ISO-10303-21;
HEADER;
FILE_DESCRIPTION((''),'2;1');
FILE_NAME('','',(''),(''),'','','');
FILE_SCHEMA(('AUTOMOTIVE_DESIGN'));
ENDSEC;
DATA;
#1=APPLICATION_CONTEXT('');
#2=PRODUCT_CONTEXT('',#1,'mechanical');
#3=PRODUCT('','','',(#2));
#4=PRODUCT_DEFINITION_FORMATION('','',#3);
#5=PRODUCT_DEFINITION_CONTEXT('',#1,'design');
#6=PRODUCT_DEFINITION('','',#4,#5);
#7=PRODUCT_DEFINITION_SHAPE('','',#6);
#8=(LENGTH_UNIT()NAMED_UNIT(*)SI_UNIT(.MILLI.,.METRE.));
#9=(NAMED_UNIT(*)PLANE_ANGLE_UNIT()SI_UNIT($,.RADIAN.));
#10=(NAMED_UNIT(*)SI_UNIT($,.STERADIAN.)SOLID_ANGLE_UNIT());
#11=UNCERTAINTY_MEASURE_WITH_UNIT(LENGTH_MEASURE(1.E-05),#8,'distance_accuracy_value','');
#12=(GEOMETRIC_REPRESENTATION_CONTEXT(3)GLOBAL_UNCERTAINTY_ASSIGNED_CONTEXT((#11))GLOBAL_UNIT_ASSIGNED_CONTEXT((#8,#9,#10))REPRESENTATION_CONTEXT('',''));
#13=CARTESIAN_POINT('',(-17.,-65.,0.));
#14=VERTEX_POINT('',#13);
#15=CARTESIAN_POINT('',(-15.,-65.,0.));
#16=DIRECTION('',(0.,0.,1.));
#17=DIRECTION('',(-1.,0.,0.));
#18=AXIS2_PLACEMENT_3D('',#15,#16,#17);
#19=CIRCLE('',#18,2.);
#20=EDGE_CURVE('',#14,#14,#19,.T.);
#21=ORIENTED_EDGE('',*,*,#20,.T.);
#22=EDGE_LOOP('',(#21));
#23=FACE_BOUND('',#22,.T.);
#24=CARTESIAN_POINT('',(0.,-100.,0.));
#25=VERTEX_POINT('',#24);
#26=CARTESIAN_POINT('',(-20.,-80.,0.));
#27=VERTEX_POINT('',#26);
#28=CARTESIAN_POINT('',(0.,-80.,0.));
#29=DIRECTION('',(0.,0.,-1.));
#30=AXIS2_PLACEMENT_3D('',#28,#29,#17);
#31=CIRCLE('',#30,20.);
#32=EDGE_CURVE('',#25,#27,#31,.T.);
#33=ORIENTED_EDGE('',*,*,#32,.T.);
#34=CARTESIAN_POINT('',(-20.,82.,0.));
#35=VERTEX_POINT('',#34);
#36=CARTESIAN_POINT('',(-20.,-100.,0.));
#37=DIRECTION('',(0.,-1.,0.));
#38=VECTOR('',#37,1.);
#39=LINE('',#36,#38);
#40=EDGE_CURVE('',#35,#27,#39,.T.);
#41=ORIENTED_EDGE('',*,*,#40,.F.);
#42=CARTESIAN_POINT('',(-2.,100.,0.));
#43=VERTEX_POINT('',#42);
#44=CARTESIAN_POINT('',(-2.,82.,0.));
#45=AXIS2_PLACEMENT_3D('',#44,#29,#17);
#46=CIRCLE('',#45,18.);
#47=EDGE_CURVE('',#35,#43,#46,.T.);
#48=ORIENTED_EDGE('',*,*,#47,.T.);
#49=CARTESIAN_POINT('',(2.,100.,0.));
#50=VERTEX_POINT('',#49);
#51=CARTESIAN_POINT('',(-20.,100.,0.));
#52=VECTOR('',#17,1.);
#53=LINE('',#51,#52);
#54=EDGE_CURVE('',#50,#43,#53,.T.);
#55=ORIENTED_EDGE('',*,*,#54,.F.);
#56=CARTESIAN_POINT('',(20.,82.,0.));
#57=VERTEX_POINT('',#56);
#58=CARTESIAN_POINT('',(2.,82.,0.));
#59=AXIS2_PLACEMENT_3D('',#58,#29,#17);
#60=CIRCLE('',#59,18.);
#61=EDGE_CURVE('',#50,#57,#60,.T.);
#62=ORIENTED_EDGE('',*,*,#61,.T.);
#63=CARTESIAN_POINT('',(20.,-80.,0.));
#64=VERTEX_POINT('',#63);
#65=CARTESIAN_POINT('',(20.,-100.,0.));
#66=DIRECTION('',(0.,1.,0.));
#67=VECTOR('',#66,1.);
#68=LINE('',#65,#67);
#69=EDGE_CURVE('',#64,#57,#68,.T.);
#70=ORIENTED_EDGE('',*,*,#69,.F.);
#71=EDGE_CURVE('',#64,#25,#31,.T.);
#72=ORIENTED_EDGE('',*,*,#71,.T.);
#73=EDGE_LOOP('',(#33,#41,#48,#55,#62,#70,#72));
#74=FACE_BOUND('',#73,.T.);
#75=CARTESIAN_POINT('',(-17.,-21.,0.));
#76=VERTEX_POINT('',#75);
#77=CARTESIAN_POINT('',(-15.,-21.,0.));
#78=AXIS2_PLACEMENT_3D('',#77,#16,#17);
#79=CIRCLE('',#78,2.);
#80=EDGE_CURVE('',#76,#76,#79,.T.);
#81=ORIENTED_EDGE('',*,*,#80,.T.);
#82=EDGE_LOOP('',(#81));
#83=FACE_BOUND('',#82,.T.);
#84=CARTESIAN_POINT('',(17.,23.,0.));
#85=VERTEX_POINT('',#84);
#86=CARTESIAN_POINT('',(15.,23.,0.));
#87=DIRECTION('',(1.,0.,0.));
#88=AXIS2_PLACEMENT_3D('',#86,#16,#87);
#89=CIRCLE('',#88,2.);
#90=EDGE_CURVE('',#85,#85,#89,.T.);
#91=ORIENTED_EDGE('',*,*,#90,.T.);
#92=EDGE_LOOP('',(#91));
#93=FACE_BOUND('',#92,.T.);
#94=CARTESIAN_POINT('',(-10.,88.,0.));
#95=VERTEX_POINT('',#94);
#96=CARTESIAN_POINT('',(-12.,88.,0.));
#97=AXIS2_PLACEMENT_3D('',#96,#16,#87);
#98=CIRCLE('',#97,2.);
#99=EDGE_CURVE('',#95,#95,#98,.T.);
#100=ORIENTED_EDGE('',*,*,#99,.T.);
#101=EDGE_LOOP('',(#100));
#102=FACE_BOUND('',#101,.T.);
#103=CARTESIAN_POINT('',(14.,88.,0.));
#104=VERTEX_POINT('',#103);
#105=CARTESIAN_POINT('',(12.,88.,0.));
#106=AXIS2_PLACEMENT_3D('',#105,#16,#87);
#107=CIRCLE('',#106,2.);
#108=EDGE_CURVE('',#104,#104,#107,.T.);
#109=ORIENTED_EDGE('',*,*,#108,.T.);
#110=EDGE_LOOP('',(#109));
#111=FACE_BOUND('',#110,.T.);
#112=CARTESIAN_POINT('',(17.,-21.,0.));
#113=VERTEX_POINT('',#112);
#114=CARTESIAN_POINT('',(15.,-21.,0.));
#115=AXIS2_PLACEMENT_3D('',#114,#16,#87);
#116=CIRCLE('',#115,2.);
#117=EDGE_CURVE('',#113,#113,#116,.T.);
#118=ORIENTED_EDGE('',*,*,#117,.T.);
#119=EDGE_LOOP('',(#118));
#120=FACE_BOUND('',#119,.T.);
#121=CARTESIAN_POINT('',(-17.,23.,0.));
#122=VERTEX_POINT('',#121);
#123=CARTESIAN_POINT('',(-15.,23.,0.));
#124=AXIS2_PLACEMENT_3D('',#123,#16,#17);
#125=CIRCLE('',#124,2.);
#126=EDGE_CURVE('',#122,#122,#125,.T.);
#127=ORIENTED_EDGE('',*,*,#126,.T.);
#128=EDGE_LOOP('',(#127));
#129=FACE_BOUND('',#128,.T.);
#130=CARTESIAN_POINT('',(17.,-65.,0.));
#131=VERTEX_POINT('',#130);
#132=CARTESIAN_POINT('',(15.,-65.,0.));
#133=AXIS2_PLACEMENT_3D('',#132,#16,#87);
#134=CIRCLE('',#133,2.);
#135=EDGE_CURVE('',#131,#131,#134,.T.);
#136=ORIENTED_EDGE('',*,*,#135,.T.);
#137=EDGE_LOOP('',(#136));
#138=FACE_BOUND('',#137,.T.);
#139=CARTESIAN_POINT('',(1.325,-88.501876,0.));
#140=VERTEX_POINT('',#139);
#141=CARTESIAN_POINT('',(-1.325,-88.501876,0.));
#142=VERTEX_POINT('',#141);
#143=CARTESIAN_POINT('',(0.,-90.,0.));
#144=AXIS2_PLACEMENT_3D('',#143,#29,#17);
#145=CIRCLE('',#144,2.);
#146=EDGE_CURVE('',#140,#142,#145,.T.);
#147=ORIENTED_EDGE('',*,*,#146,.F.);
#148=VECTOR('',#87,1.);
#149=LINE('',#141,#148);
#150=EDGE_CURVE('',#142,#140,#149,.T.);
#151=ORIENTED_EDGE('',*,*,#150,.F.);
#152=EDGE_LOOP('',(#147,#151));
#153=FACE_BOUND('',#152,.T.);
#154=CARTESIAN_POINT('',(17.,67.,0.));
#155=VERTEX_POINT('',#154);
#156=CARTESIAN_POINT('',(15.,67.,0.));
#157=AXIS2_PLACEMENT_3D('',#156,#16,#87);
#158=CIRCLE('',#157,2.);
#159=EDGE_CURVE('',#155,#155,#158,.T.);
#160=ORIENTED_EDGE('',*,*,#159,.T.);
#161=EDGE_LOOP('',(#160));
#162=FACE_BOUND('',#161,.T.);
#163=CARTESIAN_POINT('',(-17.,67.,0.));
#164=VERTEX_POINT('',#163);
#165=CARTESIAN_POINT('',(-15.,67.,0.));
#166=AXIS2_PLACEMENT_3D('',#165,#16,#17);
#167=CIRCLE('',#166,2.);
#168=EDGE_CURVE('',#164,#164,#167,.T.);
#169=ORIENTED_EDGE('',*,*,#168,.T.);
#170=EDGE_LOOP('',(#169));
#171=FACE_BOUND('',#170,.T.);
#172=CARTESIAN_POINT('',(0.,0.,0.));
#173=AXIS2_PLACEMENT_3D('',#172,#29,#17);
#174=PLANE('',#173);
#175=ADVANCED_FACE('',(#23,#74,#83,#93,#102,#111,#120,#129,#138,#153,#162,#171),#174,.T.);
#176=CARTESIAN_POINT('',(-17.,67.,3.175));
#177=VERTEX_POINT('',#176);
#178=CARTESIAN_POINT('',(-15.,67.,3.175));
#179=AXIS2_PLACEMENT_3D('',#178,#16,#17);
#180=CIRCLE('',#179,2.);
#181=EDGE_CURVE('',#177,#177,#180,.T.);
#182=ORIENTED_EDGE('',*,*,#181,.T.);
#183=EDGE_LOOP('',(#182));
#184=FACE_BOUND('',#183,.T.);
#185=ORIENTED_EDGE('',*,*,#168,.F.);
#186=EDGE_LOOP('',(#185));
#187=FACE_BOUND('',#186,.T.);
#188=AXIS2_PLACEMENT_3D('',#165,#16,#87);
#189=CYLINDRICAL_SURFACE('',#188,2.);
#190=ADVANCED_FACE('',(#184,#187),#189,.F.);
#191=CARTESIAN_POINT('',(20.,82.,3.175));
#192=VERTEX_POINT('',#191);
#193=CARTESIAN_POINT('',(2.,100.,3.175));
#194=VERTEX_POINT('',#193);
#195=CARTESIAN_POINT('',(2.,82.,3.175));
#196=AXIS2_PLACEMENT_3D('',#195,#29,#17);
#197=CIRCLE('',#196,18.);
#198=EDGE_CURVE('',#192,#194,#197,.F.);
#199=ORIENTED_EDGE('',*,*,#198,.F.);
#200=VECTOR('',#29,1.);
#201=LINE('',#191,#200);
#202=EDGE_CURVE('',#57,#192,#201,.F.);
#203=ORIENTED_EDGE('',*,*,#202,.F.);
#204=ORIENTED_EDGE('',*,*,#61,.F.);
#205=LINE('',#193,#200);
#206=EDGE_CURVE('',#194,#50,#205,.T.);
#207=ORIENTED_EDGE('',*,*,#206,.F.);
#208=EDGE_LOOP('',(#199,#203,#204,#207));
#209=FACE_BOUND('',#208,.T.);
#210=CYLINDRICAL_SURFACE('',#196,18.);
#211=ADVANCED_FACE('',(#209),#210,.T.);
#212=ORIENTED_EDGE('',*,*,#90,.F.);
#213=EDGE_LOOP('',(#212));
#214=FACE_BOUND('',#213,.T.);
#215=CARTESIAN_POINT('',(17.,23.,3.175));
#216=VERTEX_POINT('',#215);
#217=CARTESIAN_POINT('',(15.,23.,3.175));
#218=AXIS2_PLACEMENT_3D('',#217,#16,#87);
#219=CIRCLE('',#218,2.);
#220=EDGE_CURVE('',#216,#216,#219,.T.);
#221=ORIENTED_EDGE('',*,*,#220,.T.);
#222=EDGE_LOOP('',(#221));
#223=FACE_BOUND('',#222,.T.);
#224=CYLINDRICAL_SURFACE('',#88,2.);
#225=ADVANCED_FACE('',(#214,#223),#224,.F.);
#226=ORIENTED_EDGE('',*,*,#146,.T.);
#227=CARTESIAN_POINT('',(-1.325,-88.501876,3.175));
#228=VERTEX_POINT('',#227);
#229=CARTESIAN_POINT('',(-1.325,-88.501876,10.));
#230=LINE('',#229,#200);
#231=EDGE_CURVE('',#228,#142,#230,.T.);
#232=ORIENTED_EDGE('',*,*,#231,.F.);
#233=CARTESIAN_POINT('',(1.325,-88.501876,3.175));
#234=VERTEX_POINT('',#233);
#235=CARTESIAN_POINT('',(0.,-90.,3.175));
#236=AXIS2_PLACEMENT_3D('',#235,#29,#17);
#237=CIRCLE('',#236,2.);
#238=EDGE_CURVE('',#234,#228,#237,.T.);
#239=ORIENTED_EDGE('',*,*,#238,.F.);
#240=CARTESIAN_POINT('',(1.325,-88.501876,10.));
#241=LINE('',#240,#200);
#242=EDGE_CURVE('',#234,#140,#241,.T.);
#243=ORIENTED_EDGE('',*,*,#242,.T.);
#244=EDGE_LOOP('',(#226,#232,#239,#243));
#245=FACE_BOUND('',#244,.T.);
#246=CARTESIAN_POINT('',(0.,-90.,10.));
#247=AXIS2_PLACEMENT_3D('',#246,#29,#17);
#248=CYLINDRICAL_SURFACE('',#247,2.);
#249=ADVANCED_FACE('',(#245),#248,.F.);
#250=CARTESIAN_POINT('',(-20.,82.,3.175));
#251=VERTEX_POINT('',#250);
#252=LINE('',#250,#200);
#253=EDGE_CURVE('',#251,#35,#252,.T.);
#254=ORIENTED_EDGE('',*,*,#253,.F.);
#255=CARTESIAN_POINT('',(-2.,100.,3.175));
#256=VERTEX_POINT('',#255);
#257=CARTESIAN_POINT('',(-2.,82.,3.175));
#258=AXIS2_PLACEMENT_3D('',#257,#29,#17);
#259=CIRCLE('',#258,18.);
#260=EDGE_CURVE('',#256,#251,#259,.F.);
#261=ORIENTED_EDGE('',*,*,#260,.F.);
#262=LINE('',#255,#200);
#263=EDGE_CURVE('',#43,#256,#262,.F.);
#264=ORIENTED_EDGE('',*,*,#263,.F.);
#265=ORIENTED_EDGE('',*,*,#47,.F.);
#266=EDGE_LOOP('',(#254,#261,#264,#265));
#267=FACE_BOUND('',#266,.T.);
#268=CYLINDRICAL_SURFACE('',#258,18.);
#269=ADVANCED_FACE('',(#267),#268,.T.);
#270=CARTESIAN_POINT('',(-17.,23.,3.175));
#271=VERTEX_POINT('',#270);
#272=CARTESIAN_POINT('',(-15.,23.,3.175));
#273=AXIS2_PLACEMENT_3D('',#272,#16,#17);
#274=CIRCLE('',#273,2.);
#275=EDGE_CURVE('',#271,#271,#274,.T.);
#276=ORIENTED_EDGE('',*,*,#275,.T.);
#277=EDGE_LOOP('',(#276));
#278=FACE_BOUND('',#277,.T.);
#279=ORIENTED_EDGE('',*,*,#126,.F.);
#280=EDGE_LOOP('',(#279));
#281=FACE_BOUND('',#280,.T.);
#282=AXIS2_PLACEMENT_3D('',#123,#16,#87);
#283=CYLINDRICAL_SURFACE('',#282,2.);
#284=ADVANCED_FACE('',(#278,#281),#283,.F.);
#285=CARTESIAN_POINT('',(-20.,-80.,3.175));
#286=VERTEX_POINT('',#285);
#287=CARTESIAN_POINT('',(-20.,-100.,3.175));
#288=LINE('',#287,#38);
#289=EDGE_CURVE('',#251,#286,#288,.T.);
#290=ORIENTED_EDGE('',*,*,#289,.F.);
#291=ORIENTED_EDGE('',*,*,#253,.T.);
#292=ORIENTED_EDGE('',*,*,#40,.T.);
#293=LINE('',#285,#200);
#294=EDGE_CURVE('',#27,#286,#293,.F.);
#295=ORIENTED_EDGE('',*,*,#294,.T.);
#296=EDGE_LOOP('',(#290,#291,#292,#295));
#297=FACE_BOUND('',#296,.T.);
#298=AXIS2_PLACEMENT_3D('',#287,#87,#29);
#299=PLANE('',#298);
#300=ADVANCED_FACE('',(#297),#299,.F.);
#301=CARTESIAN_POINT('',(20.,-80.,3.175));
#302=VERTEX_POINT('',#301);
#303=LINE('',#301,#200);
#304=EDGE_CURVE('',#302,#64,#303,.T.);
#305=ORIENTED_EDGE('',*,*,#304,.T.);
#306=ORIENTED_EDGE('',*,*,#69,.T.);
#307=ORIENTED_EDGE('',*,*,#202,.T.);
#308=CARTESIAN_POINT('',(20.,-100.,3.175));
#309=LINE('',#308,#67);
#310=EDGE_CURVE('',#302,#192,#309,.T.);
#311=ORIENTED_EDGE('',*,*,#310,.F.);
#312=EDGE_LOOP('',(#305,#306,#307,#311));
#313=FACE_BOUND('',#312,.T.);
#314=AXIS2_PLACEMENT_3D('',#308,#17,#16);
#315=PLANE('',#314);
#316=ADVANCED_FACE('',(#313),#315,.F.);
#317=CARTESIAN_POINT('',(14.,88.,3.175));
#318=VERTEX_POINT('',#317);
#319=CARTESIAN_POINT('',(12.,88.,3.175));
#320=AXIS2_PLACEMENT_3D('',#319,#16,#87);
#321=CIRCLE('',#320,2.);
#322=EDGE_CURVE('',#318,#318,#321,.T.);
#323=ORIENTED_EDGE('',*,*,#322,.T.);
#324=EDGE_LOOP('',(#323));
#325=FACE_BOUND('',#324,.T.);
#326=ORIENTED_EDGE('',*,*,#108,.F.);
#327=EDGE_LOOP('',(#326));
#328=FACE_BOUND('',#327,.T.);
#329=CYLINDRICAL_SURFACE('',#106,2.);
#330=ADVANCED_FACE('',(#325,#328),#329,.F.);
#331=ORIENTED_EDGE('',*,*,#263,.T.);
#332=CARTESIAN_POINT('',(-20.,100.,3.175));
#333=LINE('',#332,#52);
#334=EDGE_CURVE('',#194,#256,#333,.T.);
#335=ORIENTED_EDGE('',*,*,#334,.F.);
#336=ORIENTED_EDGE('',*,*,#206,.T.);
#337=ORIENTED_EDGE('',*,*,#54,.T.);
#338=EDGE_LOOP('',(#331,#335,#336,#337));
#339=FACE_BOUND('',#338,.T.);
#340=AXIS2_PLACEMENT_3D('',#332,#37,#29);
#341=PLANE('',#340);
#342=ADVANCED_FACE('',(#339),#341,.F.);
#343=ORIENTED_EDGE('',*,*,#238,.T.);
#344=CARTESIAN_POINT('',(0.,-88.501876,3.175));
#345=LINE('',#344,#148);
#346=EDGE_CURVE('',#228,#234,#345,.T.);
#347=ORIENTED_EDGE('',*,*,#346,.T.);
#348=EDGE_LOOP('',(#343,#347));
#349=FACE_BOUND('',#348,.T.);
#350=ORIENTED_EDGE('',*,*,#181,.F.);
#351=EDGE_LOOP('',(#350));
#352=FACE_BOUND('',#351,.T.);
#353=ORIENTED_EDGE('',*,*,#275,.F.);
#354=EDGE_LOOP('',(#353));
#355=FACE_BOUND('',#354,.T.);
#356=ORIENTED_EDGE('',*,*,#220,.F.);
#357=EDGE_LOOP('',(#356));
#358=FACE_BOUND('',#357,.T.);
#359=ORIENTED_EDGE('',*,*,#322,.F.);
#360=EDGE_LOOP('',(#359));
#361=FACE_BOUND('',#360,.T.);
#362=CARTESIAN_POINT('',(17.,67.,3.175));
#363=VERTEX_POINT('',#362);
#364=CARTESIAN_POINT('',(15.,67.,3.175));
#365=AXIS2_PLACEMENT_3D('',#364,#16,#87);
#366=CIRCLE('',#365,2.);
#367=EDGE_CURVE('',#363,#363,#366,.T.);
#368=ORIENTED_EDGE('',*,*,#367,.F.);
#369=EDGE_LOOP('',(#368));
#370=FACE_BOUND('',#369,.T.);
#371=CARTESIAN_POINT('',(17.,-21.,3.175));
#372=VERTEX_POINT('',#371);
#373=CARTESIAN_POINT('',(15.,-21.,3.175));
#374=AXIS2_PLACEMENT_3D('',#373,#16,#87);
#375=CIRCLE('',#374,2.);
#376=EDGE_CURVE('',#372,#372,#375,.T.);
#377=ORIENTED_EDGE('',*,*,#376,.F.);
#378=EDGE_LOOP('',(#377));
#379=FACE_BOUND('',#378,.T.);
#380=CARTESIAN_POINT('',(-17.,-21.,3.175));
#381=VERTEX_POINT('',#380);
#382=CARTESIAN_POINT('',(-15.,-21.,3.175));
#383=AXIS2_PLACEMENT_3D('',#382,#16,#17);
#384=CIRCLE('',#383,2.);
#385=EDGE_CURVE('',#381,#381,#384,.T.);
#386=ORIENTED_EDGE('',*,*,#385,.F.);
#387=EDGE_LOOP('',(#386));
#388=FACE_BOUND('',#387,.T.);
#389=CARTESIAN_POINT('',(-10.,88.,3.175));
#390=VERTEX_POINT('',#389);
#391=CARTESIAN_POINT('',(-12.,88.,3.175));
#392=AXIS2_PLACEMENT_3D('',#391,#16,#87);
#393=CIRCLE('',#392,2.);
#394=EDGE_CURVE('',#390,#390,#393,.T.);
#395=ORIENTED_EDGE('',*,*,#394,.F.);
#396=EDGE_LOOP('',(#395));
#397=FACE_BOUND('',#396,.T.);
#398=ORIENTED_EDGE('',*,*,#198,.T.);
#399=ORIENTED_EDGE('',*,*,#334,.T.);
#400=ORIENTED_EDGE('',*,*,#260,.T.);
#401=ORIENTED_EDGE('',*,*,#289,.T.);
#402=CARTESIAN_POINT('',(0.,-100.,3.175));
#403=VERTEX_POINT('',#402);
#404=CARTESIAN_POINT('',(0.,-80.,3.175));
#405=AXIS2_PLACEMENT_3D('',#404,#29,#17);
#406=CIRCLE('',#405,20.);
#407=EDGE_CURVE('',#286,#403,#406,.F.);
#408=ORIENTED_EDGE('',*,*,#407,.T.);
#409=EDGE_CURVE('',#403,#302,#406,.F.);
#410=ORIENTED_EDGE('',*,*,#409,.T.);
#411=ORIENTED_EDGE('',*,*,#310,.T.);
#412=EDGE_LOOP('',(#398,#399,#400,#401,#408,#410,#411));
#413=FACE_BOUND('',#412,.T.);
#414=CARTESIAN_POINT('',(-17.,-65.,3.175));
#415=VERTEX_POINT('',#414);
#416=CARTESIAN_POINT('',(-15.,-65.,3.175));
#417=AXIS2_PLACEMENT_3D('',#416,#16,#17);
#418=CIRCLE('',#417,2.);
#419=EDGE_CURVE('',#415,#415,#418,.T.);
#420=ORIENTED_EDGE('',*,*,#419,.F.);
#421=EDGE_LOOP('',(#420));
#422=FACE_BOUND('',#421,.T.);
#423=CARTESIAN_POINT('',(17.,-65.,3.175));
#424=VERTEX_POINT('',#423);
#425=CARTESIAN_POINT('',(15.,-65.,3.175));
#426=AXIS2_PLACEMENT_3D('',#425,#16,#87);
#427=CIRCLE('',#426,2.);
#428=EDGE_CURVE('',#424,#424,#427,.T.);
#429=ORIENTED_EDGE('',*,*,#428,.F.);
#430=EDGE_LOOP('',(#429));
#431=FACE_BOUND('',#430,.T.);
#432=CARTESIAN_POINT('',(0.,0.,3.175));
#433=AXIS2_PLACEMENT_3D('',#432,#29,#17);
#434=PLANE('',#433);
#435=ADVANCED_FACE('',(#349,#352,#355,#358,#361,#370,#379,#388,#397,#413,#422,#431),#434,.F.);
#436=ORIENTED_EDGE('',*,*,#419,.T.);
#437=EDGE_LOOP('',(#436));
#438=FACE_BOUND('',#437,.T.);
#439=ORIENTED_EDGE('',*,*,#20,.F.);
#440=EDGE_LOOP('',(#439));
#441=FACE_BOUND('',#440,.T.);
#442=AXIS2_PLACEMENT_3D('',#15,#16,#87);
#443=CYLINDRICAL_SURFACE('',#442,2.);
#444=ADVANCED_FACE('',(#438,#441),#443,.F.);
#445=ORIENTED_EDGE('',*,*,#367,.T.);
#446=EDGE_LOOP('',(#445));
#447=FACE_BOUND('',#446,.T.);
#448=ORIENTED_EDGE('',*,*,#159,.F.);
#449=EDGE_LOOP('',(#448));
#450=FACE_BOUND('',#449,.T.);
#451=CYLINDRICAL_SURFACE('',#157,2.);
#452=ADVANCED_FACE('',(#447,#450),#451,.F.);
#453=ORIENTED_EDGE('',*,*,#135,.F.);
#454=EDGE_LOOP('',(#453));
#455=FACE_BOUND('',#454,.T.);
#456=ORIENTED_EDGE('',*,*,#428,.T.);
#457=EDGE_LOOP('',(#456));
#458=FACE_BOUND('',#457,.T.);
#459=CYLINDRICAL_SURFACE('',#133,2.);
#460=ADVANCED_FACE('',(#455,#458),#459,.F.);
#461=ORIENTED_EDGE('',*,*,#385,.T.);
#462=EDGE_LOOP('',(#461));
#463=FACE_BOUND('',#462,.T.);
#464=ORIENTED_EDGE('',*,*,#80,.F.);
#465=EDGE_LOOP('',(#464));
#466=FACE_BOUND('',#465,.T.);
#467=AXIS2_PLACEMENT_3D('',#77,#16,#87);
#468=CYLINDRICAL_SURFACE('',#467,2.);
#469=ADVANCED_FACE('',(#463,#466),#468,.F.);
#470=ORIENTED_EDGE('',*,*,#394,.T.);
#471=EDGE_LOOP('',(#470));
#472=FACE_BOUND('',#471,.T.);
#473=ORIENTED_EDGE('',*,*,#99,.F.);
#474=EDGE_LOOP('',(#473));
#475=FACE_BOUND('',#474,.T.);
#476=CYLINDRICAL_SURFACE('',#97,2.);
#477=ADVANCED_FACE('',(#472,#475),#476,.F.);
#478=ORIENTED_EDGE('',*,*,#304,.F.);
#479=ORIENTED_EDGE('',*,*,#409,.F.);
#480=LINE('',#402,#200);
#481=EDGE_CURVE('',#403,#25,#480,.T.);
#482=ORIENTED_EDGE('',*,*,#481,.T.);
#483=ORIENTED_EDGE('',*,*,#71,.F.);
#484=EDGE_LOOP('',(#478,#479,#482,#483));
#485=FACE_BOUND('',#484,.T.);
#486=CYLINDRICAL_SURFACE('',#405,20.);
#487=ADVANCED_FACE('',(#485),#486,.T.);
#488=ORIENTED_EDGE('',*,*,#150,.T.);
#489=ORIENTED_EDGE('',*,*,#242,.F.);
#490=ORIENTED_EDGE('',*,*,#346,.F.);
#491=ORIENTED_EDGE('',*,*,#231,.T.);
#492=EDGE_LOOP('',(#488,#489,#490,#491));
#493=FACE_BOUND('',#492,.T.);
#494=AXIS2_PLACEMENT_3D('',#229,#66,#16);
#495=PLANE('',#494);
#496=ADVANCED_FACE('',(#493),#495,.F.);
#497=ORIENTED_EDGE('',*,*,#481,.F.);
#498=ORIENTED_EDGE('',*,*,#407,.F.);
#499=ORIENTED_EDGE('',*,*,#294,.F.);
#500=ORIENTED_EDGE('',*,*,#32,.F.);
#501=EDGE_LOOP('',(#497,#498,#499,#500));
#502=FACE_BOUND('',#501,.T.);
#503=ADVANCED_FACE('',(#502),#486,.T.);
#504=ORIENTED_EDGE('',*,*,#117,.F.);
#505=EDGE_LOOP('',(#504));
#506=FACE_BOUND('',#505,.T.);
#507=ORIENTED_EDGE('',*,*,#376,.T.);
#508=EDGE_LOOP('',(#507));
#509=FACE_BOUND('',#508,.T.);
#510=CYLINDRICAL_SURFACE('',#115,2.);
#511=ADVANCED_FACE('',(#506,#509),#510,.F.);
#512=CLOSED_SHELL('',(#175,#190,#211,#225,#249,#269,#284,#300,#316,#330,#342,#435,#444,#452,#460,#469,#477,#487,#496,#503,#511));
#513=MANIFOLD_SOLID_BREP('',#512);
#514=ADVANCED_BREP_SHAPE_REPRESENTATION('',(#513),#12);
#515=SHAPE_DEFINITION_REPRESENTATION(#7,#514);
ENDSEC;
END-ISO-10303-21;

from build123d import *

# Parameters (mm, degrees)
SKETCH2_W           = 40
SKETCH2_H           = 200
BOSS_EXTRUDE1_DEPTH = 3.175
CUT_EXTRUDE1_DEPTH  = 10
FILLET1_R           = 20
FILLET2_R           = 18
SKETCH6_R           = 2
CUT_EXTRUDE4_DEPTH  = 103.029802631
SKETCH7_R           = 2
CUT_EXTRUDE5_DEPTH  = 103.029802631


with BuildPart() as part:
    # Sketch2 → Boss-Extrude1 (new body)
    with BuildSketch(Plane.XY):
        Rectangle(SKETCH2_W, SKETCH2_H)
    extrude(amount=BOSS_EXTRUDE1_DEPTH)

    # Sketch3 → Cut-Extrude1 (cut)
    with BuildSketch(Plane(origin=(0, 0, 0), x_dir=(-1, 0, 0), z_dir=(0, 0, -1))):
        with BuildLine():
            Line((1.325, -88.501876173), (-1.325, -88.501876173))
            ThreePointArc((-1.325, -88.501876173), (0, -92), (1.325, -88.501876173))
        make_face()
    extrude(amount=-CUT_EXTRUDE1_DEPTH, mode=Mode.SUBTRACT)

    # Fillet1
    fillet1_edges = [part.edges().sort_by_distance(p)[0] for p in [
        (20, -100, 1.5875),
        (-20, -100, 1.5875),
    ]]
    fillet(fillet1_edges, radius=FILLET1_R - 0.0001)  # a hair under: the kernel refuses the full size

    # Fillet2
    fillet2_edges = [part.edges().sort_by_distance(p)[0] for p in [
        (-20, 100, 1.5875),
        (20, 100, 1.5875),
    ]]
    fillet(fillet2_edges, radius=FILLET2_R)

    # Sketch6 → Cut-Extrude4 (cut, through all)
    with BuildSketch(Plane.XY.offset(3.175)):
        with Locations((15, 67)):
            Circle(SKETCH6_R)
        with Locations((15, -21)):
            Circle(SKETCH6_R)
        with Locations((15, 23)):
            Circle(SKETCH6_R)
        with Locations((15, -65)):
            Circle(SKETCH6_R)
        with Locations(Location((-15, -65, 0), (0, 0, 180))):
            Circle(SKETCH6_R)
        with Locations(Location((-15, 23, 0), (0, 0, 180))):
            Circle(SKETCH6_R)
        with Locations(Location((-15, -21, 0), (0, 0, 180))):
            Circle(SKETCH6_R)
        with Locations(Location((-15, 67, 0), (0, 0, 180))):
            Circle(SKETCH6_R)
    extrude(amount=-CUT_EXTRUDE4_DEPTH, mode=Mode.SUBTRACT)

    # Sketch7 → Cut-Extrude5 (cut, through all)
    with BuildSketch(Plane.XY.offset(3.175)):
        with Locations((-12, 88)):
            Circle(SKETCH7_R)
        with Locations((12, 88)):
            Circle(SKETCH7_R)
    extrude(amount=-CUT_EXTRUDE5_DEPTH, mode=Mode.SUBTRACT)


solid = part.part
